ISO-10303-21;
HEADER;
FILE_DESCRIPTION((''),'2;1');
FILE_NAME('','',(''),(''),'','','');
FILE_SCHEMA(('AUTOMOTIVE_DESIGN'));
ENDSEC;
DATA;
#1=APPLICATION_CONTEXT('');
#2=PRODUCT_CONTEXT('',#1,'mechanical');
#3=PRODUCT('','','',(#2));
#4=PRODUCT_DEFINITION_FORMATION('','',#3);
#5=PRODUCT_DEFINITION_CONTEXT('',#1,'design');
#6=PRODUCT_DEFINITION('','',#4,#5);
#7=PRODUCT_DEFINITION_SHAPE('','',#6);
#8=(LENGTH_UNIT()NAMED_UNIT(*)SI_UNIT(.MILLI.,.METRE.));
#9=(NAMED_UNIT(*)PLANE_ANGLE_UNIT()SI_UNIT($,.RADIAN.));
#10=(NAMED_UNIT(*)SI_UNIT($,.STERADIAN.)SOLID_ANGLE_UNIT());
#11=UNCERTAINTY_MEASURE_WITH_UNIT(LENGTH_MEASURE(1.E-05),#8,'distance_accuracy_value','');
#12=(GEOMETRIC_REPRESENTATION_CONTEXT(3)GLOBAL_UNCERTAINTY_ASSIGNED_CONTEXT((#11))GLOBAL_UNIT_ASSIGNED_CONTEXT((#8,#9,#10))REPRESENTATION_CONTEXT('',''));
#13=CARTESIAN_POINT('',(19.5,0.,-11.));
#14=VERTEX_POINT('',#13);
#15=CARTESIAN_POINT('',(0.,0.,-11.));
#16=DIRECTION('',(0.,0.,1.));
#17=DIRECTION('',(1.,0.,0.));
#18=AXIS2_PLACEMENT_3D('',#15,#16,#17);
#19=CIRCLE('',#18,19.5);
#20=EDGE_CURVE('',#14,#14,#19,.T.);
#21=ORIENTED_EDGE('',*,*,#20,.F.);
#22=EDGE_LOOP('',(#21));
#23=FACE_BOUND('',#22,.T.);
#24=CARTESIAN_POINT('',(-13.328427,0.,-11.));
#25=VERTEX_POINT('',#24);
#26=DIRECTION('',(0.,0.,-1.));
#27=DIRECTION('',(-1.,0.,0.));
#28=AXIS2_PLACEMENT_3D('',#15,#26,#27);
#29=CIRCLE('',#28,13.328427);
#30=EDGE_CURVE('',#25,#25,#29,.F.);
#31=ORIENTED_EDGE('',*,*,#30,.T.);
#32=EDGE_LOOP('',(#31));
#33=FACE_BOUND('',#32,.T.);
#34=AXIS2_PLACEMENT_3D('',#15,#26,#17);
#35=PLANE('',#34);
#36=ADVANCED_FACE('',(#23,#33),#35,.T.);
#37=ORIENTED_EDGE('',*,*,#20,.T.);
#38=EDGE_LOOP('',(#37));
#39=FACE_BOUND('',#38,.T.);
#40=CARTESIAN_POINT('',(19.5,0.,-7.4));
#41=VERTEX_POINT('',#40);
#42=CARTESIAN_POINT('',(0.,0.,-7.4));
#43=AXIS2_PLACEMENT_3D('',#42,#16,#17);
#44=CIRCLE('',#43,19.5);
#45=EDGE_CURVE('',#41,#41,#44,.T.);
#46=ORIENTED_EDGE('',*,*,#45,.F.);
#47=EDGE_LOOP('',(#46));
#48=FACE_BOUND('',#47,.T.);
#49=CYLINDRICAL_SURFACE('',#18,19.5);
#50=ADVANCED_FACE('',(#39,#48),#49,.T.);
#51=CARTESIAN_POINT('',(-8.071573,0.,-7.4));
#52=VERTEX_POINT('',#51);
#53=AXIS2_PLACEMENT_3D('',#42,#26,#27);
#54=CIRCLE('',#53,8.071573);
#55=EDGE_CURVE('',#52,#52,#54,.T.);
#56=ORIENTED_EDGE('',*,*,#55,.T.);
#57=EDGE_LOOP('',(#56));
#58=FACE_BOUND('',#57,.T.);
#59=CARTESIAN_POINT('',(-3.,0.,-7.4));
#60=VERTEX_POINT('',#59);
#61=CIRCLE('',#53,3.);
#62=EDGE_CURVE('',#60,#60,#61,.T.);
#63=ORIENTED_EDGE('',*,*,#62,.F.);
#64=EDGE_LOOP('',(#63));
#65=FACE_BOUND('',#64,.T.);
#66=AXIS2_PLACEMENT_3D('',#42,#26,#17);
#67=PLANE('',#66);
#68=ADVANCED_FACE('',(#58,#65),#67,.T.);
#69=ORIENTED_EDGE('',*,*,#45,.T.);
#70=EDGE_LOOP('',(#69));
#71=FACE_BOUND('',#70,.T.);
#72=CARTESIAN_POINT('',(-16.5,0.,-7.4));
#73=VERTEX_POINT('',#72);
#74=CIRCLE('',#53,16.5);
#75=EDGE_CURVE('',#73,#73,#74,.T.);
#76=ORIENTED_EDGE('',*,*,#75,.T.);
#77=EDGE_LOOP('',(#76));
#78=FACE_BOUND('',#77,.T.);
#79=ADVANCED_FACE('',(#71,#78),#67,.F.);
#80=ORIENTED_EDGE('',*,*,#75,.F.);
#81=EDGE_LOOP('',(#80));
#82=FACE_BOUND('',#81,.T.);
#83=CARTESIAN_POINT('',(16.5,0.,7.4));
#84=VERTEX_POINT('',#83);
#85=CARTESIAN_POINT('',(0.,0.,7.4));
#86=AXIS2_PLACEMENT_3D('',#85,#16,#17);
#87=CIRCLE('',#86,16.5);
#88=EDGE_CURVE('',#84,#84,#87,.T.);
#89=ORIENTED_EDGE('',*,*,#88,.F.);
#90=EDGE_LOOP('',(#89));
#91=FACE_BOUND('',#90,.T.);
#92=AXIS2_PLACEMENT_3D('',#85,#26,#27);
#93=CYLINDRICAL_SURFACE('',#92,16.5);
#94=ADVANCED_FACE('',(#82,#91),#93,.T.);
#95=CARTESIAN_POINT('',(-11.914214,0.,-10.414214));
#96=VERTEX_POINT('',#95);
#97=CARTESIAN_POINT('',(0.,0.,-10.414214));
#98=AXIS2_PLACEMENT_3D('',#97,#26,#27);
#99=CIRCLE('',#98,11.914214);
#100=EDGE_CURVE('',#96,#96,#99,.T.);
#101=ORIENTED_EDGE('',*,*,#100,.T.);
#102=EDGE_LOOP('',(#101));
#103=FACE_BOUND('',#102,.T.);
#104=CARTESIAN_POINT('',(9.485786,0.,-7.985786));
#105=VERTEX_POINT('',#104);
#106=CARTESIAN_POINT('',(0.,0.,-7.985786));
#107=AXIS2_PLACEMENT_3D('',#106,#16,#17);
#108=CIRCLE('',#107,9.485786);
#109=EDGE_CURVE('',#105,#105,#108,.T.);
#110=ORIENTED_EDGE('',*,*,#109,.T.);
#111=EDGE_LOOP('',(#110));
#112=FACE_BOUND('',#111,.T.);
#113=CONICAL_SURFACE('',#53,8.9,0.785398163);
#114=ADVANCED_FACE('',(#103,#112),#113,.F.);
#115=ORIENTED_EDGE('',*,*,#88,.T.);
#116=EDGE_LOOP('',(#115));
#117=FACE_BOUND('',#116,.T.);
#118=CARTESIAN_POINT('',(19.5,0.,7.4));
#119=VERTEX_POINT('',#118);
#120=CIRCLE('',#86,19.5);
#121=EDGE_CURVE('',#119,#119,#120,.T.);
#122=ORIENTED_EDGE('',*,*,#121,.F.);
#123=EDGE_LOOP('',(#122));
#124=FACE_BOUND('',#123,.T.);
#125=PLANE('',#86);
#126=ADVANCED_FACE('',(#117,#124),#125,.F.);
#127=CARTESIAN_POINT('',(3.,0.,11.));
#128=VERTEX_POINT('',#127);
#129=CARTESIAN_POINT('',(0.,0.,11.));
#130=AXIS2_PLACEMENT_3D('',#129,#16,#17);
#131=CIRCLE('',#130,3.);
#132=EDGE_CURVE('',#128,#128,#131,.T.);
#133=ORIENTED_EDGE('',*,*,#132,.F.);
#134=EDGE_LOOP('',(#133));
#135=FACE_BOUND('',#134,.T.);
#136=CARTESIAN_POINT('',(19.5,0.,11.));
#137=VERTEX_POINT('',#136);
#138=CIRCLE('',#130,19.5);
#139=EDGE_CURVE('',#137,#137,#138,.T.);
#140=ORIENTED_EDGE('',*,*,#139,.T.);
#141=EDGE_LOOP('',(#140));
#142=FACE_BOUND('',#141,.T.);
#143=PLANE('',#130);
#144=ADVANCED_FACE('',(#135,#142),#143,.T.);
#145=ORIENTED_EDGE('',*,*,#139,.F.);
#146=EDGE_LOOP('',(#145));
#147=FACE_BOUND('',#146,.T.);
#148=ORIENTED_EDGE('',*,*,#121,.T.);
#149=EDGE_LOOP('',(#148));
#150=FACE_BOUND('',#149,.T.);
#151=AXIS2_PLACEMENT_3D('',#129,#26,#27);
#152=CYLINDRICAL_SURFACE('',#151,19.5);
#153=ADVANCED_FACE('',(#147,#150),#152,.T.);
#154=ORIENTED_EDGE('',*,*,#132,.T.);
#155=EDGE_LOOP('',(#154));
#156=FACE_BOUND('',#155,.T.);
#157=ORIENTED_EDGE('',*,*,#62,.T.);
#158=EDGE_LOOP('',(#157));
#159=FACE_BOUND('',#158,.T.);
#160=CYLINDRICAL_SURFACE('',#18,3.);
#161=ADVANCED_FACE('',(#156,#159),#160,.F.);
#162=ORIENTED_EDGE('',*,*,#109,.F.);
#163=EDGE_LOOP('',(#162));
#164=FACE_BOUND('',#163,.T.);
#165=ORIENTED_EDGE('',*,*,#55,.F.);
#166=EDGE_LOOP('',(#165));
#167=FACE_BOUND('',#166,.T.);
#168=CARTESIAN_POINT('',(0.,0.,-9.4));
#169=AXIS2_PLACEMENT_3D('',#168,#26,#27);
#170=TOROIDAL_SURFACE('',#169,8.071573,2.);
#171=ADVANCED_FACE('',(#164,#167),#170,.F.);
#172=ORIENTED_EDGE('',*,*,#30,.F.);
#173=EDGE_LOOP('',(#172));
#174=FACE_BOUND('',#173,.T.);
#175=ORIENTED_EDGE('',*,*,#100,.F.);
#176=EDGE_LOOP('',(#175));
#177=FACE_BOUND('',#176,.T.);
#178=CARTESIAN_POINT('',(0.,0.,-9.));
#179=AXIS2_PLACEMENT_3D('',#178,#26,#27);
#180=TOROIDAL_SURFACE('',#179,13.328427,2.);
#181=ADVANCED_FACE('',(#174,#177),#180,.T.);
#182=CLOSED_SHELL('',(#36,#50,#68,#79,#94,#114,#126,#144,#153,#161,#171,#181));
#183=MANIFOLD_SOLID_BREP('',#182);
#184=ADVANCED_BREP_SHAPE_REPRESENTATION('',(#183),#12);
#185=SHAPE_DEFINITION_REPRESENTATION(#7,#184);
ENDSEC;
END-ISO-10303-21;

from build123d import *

# Parameters (mm, degrees)
SKETCH1_R               = 16.5
SKETCH1_R_2             = 12.5
BOSS_EXTRUDE1_DEPTH     = 7.4
SKETCH6_R               = 19.5
SKETCH6_R_2             = 12.5
BOSS_EXTRUDE2_DEPTH     = 3.6
SKETCH12_R              = 12.5
SKETCH12_R_2            = 1.5
BOSS_EXTRUDE4_DEPTH     = 18.4
CHAMFER3_SIZE           = 3.6
CUT_EXTRUDE1_DEPTH      = 35.662660025
CUT_EXTRUDE1_DEPTH_BACK = 35.662660025
SKETCH14_R              = 3


with BuildPart() as part:
    # Sketch1 → Boss-Extrude1 (new, symmetric)
    with BuildSketch(Plane.XY):
        Circle(SKETCH1_R)
        Circle(SKETCH1_R_2, mode=Mode.SUBTRACT)
    extrude(amount=BOSS_EXTRUDE1_DEPTH, both=True)

    # Sketch6 → Boss-Extrude2 (add)
    with BuildSketch(Plane.XY.offset(7.4)):
        Circle(SKETCH6_R)
        Circle(SKETCH6_R_2, mode=Mode.SUBTRACT)
    boss_extrude2 = extrude(amount=BOSS_EXTRUDE2_DEPTH)

    # Mirror1: Boss-Extrude2 across plane
    add(boss_extrude2.mirror(Plane.XY))

    # Sketch12 → Boss-Extrude4 (add)
    with BuildSketch(Plane.XY.offset(11)):
        with Locations(Location((0, 0, 0), (0, 0, 180))):
            Circle(SKETCH12_R)
        Circle(SKETCH12_R_2, mode=Mode.SUBTRACT)
    extrude(amount=-BOSS_EXTRUDE4_DEPTH)

    # Chamfer3
    chamfer3_edges = [part.edges().sort_by_distance(p)[0] for p in [
        (-12.5, 0, -7.4),
    ]]
    chamfer(chamfer3_edges, length=CHAMFER3_SIZE - 0.0001)  # a hair under: the kernel refuses the full size

    # Fillet3: read off the stored shape, not the designer's step
    # Fillet3 outline → Fillet3 (revolve, cut)
    with BuildSketch(Plane.XZ):
        with BuildLine():
            Line((11.914213562, -11), (13.328427125, -11))
            ThreePointArc((13.328427125, -11), (12.56306026, -10.847759065), (11.914213562, -10.414213562))
            Line((11.914213562, -10.414213562), (11.914213562, -11))
        make_face()
    revolve(axis=Axis((0, 0, 0), (0, 0, 1)), mode=Mode.SUBTRACT)

    # Fillet3 2 outline → Fillet3 2 (revolve)
    with BuildSketch(Plane.XZ):
        with BuildLine():
            ThreePointArc((8.071572875, -7.4), (8.83693974, -7.552240935), (9.485786438, -7.985786438))
            Line((9.485786438, -7.985786438), (9.485786438, -7.4))
            Line((9.485786438, -7.4), (8.071572875, -7.4))
        make_face()
    revolve(axis=Axis((0, 0, 0), (0, 0, 1)))

    # Sketch14 → Cut-Extrude1 (cut, two sides: drawn at the far end of the back side and taken through both)
    with BuildSketch(Plane.XY.offset(-10).offset(-CUT_EXTRUDE1_DEPTH_BACK)):
        Circle(SKETCH14_R)
    extrude(amount=CUT_EXTRUDE1_DEPTH + CUT_EXTRUDE1_DEPTH_BACK, mode=Mode.SUBTRACT)


solid = part.part
